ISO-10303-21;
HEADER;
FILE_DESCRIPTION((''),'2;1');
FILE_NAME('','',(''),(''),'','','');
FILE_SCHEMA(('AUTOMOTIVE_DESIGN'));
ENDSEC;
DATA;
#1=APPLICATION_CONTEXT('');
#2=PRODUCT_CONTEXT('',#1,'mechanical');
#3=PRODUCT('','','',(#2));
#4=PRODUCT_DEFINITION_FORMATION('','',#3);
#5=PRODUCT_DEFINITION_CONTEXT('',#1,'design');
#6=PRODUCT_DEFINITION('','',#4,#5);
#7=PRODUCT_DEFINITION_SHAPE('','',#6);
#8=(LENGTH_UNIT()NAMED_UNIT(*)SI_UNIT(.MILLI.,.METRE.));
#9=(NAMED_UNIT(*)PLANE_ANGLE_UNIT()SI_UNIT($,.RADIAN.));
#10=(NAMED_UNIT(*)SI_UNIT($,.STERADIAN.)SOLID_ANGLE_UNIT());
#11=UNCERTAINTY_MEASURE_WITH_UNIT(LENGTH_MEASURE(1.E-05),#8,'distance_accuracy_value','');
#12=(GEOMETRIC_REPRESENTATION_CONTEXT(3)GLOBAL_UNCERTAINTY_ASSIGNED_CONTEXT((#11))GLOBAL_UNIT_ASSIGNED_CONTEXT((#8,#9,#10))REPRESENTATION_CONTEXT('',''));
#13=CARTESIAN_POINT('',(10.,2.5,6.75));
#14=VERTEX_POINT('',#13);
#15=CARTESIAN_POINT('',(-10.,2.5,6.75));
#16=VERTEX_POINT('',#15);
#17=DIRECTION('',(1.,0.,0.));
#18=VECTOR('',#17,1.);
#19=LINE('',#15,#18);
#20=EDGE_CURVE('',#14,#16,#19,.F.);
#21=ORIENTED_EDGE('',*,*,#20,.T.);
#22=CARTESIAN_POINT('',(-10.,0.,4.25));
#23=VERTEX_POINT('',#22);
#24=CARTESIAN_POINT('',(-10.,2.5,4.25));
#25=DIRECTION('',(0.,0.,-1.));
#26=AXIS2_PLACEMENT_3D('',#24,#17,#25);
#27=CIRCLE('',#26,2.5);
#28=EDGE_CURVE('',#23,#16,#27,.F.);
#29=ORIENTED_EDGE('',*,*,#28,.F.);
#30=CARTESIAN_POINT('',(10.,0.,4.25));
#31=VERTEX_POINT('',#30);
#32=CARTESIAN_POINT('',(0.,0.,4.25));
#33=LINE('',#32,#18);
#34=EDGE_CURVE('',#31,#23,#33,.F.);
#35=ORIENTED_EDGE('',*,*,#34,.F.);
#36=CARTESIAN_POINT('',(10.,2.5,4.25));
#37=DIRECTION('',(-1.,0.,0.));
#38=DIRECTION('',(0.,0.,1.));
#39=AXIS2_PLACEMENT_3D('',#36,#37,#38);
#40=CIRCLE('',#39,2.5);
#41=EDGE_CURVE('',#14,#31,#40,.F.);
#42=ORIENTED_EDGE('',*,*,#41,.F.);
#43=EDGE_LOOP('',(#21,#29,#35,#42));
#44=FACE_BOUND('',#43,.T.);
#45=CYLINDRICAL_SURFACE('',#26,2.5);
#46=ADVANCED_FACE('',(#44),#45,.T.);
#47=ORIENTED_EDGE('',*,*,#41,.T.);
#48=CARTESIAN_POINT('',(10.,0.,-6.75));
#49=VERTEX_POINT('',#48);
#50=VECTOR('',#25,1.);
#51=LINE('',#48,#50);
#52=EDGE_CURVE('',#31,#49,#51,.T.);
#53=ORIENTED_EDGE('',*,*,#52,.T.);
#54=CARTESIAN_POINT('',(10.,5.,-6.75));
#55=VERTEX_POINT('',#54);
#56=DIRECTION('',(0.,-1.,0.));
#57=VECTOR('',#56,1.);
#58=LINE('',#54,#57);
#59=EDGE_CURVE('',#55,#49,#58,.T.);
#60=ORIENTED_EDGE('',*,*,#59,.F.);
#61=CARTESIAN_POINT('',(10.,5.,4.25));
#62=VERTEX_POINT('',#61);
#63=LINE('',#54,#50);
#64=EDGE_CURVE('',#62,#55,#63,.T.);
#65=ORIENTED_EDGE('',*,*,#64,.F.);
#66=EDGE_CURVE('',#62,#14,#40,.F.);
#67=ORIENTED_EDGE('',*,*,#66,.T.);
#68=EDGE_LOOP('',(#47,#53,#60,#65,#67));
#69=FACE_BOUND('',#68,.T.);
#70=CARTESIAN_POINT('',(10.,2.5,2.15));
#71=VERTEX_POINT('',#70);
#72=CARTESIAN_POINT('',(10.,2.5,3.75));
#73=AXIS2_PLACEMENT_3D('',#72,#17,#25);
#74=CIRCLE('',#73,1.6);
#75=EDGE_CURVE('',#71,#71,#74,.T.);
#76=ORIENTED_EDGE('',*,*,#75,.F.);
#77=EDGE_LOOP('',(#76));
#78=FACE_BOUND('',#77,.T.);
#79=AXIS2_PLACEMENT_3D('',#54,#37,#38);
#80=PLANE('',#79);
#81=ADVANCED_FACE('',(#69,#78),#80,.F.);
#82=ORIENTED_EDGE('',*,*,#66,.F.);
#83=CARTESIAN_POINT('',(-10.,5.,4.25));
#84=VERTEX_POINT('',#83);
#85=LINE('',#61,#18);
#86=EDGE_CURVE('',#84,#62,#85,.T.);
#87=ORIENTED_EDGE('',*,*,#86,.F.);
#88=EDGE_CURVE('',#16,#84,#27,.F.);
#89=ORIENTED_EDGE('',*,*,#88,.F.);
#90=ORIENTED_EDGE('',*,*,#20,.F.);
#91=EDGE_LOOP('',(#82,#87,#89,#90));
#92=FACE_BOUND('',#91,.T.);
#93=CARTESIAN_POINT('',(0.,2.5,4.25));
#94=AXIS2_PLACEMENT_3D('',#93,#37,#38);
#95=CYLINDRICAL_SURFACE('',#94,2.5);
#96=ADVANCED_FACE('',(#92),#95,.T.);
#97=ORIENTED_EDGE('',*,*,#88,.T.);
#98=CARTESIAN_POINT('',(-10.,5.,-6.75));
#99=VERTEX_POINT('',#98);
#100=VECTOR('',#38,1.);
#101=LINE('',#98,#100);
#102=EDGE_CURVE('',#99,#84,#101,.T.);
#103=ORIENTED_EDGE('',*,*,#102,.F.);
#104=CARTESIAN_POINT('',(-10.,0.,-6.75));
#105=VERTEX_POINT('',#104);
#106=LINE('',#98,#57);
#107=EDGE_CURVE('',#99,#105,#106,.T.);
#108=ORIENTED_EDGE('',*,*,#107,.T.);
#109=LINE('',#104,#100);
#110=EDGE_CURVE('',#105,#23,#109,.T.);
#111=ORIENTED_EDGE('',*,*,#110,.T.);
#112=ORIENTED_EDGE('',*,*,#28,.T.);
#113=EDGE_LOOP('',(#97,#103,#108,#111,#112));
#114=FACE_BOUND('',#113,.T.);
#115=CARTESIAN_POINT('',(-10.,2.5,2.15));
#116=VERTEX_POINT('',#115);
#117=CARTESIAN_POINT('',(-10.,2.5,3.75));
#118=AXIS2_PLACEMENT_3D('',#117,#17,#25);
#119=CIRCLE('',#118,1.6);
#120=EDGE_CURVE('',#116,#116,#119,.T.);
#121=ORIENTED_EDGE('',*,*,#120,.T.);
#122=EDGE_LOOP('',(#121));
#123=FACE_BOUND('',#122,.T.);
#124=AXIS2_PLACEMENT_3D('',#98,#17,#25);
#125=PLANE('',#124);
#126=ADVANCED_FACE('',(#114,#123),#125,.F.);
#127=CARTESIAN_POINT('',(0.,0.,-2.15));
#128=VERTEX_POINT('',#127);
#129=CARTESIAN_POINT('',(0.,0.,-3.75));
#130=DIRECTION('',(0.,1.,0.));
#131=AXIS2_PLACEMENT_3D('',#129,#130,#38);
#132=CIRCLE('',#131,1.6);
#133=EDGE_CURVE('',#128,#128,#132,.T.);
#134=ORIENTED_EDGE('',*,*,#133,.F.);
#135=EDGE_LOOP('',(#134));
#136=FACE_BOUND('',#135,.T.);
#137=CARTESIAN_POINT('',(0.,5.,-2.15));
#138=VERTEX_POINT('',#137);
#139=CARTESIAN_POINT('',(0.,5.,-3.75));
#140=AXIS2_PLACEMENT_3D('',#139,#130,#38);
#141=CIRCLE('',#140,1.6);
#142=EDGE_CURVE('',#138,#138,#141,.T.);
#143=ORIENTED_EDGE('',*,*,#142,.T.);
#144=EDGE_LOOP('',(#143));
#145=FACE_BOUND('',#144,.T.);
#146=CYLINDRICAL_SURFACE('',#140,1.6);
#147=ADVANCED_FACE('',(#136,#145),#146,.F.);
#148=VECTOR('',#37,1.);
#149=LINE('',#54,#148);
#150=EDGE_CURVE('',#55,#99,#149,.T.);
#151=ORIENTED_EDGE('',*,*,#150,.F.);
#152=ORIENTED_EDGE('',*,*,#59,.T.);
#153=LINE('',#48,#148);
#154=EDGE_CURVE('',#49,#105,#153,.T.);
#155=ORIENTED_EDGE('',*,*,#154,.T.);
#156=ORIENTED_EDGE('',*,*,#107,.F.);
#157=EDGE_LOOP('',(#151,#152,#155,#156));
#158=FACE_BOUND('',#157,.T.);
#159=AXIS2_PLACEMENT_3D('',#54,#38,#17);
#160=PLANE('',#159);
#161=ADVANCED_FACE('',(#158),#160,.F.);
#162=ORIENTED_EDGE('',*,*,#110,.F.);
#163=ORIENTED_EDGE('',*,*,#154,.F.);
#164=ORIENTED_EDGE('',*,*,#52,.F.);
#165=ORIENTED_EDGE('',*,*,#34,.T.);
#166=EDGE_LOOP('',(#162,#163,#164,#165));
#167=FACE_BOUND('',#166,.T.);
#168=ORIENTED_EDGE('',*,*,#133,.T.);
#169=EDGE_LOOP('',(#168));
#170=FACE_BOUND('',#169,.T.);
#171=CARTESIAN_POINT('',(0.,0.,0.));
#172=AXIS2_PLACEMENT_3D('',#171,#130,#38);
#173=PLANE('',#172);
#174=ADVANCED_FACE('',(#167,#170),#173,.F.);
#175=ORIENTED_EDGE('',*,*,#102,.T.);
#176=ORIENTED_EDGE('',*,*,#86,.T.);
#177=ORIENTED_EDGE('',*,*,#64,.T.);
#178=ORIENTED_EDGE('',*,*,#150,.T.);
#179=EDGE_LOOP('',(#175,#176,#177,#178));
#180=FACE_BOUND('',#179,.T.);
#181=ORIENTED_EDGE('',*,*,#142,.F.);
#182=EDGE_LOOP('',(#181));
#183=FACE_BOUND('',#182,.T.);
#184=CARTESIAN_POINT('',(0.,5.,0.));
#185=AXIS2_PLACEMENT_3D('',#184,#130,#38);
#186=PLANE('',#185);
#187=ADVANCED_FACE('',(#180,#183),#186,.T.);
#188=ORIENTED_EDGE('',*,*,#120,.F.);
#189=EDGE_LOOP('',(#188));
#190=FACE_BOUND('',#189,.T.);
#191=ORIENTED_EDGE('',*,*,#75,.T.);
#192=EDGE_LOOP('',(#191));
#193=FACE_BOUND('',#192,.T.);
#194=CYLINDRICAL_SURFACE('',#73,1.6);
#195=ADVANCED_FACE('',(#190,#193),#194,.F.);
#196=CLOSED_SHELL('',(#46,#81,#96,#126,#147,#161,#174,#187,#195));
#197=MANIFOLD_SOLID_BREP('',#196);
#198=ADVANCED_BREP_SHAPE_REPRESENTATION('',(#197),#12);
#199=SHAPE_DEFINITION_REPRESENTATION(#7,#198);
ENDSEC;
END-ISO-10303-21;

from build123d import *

# Parameters (mm, degrees)
SKETCH1_W                  = 20
SKETCH1_H                  = 13.5
BOSS_EXTRUDE1_DEPTH        = 5
F_3_2_3_2_M2_HEAT_SET_D    = 3.2
FILLET2_R                  = 2.5
F_3_2_3_2_DIAMETER_HOLE1_D = 3.2


with BuildPart() as part:
    # Sketch1 → Boss-Extrude1 (new body)
    with BuildSketch(Plane(origin=(0, 0, 0), x_dir=(1, 0, 0), z_dir=(0, 1, 0))):
        Rectangle(SKETCH1_W, SKETCH1_H)
    extrude(amount=BOSS_EXTRUDE1_DEPTH)

    # Ø3.2 (3.2) M2 heat set (through all)
    with Locations(Plane(origin=(0, 5, 0), x_dir=(1, 0, 0), z_dir=(0, 1, 0))):
        with Locations((0, 3.75)):
            Hole(F_3_2_3_2_M2_HEAT_SET_D / 2)

    # Fillet2
    fillet2_edges = [part.edges().sort_by_distance(p)[0] for p in [
        (0, 0, 6.75),
        (0, 5, 6.75),
    ]]
    fillet(fillet2_edges, radius=FILLET2_R - 0.0001)  # a hair under: the kernel refuses the full size

    # Ø3.2 (3.2) Diameter Hole1 (through all)
    with Locations(Plane(origin=(10, 0, 0), x_dir=(0, 0, -1), z_dir=(1, 0, 0))):
        with Locations((-3.75, 2.5)):
            Hole(F_3_2_3_2_DIAMETER_HOLE1_D / 2)


solid = part.part
